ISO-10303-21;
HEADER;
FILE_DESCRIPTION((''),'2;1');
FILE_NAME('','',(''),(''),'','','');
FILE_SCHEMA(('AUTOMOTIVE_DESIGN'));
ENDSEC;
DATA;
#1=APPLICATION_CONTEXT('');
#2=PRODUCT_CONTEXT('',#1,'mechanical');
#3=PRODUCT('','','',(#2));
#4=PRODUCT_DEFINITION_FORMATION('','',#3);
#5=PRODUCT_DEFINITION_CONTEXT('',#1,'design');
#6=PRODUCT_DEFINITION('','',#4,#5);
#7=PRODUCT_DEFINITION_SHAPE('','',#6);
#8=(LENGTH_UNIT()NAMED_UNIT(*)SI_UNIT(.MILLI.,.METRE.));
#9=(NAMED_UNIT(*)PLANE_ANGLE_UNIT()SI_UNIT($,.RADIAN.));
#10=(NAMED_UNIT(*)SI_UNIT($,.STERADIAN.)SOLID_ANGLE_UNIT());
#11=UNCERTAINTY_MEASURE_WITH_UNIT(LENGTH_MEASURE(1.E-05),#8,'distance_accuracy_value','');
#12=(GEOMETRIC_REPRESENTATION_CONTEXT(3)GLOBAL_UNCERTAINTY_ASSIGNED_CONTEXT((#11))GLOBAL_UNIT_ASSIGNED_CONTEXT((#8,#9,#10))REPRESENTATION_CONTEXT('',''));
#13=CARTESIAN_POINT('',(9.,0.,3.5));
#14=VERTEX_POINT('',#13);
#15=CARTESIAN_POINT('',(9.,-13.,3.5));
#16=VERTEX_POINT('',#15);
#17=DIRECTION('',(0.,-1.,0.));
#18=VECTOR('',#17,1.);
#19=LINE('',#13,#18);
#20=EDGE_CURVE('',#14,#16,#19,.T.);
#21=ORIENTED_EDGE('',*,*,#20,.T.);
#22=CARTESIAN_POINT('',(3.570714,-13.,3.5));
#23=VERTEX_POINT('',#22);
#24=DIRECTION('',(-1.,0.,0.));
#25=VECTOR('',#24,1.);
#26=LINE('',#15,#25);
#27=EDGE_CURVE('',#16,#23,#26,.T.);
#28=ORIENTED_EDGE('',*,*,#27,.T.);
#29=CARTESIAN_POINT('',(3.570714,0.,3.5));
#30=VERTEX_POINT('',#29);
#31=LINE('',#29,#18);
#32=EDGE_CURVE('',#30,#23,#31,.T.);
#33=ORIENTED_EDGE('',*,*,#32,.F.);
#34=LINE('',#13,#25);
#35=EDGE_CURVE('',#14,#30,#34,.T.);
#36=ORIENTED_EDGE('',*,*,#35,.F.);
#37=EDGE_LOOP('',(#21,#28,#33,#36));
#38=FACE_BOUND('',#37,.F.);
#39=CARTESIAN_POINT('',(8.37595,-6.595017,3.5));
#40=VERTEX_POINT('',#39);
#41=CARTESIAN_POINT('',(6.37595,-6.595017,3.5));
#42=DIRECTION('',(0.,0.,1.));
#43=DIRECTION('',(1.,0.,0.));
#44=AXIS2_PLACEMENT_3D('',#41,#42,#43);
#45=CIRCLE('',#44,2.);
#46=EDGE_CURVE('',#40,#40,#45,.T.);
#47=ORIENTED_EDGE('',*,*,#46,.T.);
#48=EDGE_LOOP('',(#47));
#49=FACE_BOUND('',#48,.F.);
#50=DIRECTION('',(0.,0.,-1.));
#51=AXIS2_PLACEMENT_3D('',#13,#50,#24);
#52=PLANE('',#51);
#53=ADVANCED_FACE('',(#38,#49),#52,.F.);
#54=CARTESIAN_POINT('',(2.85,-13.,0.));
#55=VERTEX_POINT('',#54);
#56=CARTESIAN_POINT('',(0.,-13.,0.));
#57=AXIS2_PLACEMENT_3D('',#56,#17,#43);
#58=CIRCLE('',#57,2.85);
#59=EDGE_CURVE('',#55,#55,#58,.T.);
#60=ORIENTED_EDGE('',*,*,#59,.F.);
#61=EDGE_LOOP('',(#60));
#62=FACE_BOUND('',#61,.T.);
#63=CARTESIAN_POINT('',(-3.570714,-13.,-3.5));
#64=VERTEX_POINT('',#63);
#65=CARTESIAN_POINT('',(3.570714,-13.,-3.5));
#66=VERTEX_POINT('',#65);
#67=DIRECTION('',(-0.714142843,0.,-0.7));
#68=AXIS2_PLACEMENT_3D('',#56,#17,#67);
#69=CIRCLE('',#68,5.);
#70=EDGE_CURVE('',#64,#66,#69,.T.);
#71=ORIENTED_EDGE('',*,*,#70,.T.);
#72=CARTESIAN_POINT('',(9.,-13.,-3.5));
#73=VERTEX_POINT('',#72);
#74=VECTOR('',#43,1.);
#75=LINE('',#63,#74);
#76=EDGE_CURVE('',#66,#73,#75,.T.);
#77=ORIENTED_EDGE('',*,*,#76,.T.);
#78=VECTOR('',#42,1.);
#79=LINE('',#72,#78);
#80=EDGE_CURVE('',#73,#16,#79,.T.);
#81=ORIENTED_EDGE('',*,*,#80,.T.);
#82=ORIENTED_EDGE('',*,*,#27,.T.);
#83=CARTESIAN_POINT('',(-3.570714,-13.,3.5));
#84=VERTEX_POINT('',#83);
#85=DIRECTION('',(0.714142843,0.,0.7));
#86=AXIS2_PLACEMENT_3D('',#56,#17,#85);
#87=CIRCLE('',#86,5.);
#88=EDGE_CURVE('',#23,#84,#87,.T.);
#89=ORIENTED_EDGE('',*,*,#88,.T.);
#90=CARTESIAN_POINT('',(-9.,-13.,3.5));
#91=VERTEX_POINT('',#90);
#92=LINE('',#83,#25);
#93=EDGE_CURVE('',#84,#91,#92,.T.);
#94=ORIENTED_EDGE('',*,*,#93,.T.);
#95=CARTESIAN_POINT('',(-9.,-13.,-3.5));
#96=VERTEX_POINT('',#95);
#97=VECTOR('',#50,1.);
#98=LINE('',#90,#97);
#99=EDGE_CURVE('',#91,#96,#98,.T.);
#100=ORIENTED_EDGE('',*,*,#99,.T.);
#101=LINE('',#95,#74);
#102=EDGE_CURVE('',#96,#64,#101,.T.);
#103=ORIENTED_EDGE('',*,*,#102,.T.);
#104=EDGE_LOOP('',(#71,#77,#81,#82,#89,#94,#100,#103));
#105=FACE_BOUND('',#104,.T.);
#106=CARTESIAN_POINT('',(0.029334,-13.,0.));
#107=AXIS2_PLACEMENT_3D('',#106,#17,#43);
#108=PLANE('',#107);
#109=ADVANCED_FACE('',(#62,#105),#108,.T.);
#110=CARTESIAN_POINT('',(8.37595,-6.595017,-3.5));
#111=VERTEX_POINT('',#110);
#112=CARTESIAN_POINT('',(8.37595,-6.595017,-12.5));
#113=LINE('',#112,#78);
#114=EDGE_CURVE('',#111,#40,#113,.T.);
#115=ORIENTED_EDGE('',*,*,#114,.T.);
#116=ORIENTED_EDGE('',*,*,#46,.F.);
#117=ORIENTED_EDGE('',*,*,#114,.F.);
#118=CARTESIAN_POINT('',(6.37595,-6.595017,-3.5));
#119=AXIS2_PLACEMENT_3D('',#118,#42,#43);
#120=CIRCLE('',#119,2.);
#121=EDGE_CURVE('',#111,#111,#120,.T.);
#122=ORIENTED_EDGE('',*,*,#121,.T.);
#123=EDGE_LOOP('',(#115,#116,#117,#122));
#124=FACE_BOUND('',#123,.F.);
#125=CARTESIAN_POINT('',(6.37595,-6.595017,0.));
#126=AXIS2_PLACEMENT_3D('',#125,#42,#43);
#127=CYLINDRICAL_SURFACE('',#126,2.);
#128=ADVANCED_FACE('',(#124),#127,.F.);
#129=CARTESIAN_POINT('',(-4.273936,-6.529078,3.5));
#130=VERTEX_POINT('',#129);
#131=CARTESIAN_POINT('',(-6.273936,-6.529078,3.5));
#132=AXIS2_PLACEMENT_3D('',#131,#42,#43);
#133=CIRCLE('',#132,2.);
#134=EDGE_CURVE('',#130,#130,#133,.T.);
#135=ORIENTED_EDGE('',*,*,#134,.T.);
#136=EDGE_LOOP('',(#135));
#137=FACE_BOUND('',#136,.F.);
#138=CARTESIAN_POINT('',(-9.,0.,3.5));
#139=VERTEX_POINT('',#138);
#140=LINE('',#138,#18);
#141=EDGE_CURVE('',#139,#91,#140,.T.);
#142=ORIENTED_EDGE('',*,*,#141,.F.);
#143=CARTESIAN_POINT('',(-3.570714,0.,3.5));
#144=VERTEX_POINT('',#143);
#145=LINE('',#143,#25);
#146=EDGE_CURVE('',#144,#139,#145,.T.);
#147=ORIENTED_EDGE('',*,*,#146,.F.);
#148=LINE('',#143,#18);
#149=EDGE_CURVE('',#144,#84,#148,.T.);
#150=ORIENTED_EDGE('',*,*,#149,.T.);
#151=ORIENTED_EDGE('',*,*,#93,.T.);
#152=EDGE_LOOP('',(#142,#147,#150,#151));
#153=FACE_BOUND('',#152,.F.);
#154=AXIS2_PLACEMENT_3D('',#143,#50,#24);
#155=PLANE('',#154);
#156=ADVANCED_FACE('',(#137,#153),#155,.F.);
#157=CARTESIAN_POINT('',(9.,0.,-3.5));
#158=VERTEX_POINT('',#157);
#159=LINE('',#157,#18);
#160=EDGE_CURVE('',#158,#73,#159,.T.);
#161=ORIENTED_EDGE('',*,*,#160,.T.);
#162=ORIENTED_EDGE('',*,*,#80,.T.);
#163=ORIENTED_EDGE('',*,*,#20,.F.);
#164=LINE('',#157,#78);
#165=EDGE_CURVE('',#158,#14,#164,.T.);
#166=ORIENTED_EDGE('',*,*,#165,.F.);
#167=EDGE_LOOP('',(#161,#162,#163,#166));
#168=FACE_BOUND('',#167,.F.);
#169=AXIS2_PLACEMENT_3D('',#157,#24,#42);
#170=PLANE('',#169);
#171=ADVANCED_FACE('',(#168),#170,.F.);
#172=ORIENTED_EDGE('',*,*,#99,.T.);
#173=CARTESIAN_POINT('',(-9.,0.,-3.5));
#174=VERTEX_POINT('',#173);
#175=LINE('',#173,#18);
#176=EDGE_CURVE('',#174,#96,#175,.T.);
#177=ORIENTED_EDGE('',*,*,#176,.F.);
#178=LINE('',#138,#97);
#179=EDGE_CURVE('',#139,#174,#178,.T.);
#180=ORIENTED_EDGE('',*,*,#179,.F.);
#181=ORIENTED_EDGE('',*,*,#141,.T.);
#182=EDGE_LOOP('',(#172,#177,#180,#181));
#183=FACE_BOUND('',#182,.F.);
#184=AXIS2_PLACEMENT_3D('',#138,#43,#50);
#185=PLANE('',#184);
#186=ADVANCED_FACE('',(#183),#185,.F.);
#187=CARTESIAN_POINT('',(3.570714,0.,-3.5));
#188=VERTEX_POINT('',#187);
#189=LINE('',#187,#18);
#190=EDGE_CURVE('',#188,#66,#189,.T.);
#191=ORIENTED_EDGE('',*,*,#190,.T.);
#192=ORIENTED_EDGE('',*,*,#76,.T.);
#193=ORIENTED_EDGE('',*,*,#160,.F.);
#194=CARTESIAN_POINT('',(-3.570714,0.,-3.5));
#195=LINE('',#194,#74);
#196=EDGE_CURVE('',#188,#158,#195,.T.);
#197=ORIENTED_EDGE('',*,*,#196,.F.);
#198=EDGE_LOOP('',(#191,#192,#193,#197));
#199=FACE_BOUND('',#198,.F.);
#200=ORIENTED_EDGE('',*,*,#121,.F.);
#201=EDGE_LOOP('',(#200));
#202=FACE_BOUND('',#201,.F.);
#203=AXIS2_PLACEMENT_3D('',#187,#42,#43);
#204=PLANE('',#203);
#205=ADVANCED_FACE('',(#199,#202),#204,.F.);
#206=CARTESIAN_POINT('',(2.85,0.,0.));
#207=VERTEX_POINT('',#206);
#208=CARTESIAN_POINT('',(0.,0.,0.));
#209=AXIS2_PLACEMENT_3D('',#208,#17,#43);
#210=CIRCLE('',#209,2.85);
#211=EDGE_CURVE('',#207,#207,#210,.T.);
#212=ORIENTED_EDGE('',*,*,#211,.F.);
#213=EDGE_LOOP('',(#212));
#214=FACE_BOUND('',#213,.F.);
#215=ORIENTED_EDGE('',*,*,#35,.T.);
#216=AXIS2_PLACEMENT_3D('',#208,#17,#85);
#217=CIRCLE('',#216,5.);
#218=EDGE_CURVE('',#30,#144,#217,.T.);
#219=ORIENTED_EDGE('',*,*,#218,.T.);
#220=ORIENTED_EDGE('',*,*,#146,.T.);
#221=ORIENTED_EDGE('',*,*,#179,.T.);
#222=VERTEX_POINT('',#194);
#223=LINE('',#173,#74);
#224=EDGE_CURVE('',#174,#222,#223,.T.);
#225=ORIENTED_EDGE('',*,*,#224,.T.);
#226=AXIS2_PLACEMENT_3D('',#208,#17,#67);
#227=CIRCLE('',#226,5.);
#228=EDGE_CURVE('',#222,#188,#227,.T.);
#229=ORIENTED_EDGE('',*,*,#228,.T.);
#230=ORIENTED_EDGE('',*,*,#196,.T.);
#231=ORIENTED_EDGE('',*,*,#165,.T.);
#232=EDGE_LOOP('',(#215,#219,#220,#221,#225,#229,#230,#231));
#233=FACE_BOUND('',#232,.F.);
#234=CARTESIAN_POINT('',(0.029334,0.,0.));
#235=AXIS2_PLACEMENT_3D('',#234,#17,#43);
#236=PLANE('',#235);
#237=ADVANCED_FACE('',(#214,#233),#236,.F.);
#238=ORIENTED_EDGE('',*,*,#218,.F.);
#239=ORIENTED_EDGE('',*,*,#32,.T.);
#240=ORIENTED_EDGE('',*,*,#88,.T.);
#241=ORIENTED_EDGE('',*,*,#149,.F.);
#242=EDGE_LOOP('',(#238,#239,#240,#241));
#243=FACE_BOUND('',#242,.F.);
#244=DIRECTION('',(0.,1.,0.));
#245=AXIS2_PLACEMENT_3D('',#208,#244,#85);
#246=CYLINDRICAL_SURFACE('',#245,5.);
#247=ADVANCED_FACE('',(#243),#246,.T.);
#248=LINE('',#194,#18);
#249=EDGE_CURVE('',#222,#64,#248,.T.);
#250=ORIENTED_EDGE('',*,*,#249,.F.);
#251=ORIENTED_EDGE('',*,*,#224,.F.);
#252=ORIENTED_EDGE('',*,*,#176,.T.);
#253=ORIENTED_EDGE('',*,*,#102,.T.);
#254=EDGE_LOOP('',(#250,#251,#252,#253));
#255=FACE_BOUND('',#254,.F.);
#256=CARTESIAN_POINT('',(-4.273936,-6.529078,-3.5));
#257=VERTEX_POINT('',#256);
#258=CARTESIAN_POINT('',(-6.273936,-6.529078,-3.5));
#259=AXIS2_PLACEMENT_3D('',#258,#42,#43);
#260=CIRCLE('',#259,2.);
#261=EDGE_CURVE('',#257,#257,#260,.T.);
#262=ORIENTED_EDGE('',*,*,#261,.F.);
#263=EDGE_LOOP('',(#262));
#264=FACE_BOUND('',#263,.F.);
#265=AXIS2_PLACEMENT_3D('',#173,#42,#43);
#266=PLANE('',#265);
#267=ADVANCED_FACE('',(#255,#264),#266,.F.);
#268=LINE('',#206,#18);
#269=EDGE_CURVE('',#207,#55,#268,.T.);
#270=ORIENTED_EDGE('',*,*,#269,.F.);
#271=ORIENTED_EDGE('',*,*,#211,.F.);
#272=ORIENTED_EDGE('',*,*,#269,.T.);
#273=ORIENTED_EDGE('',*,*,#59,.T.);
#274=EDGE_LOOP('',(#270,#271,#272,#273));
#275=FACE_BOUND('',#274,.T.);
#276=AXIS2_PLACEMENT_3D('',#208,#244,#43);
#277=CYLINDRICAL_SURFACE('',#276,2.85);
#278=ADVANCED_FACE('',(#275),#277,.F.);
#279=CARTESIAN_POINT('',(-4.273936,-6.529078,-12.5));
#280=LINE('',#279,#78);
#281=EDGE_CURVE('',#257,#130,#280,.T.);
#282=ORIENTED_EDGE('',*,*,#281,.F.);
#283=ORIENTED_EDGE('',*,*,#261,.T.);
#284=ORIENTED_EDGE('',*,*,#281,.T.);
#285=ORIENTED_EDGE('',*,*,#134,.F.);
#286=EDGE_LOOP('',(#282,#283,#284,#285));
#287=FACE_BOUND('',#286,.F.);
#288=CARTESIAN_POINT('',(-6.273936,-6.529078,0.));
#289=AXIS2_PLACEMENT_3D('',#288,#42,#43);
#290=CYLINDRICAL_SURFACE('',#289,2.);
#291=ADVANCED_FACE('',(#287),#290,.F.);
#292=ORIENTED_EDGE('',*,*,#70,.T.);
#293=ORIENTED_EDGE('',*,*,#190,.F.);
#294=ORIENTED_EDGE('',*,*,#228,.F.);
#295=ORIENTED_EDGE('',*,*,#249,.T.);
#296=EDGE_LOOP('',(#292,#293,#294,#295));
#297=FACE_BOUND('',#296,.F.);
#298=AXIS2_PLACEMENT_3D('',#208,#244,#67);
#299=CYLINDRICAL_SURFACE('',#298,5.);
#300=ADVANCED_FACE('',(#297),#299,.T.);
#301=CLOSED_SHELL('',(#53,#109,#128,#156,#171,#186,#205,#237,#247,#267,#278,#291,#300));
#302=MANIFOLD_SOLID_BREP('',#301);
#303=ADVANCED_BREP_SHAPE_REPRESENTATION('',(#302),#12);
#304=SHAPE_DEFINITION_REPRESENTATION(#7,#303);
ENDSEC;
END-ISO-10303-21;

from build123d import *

# Parameters (mm, degrees)
F0_R     = 2.85
F1_DEPTH = 13
F2_R     = 2
F3_DEPTH = 12.5
F4_R     = 2
F5_DEPTH = 12.5


# Not quite as in the source:
# - a feature names something its author has since deleted; it is built from what else it names


with BuildPart() as f1:
    # F0 (on Front) → F1 (new body)
    with BuildSketch(Plane.XZ):
        with BuildLine():
            ThreePointArc((3.5707142143, -3.5), (4.6289075964, -1.8902948088), (5, 0))
            ThreePointArc((5, 0), (4.6289075964, 1.8902948088), (3.5707142143, 3.5))
            Line((3.5707142143, 3.5), (-3.5707142143, 3.5))
            ThreePointArc((-3.5707142143, 3.5), (-5, 0), (-3.5707142143, -3.5))
            Line((-3.5707142143, -3.5), (3.5707142143, -3.5))
        make_face()
        Circle(F0_R, mode=Mode.SUBTRACT)
        with BuildLine():
            ThreePointArc((3.5707142143, 3.5), (4.6289075964, 1.8902948088), (5, 0))
            ThreePointArc((5, 0), (4.6289075964, -1.8902948088), (3.5707142143, -3.5))
            Line((3.5707142143, -3.5), (9, -3.5))
            Line((9, -3.5), (9, 3.5))
            Line((9, 3.5), (3.5707142143, 3.5))
        make_face()
        with BuildLine():
            Line((-3.5707142143, 3.5), (3.5707142143, 3.5))
            ThreePointArc((3.5707142143, 3.5), (0, 5), (-3.5707142143, 3.5))
        make_face()
        with BuildLine():
            ThreePointArc((-3.5707142143, -3.5), (0, -5), (3.5707142143, -3.5))
            Line((3.5707142143, -3.5), (-3.5707142143, -3.5))
        make_face()
        with BuildLine():
            ThreePointArc((-3.5707142143, -3.5), (-5, 0), (-3.5707142143, 3.5))
            Line((-3.5707142143, 3.5), (-9, 3.5))
            Line((-9, 3.5), (-9, -3.5))
            Line((-9, -3.5), (-3.5707142143, -3.5))
        make_face()
    extrude(amount=F1_DEPTH)

    # F2 (on Top) → F3 (cut, symmetric)
    with BuildSketch(Plane.XY):
        with Locations((6.3759502955, -6.5950173885)):
            Circle(F2_R)
    extrude(amount=F3_DEPTH, both=True, mode=Mode.SUBTRACT)

    # F4 (on Top) → F5 (cut, symmetric)
    with BuildSketch(Plane.XY):
        with Locations((-6.2739360146, -6.5290778875)):
            Circle(F4_R)
    extrude(amount=F5_DEPTH, both=True, mode=Mode.SUBTRACT)


solid = f1.part
